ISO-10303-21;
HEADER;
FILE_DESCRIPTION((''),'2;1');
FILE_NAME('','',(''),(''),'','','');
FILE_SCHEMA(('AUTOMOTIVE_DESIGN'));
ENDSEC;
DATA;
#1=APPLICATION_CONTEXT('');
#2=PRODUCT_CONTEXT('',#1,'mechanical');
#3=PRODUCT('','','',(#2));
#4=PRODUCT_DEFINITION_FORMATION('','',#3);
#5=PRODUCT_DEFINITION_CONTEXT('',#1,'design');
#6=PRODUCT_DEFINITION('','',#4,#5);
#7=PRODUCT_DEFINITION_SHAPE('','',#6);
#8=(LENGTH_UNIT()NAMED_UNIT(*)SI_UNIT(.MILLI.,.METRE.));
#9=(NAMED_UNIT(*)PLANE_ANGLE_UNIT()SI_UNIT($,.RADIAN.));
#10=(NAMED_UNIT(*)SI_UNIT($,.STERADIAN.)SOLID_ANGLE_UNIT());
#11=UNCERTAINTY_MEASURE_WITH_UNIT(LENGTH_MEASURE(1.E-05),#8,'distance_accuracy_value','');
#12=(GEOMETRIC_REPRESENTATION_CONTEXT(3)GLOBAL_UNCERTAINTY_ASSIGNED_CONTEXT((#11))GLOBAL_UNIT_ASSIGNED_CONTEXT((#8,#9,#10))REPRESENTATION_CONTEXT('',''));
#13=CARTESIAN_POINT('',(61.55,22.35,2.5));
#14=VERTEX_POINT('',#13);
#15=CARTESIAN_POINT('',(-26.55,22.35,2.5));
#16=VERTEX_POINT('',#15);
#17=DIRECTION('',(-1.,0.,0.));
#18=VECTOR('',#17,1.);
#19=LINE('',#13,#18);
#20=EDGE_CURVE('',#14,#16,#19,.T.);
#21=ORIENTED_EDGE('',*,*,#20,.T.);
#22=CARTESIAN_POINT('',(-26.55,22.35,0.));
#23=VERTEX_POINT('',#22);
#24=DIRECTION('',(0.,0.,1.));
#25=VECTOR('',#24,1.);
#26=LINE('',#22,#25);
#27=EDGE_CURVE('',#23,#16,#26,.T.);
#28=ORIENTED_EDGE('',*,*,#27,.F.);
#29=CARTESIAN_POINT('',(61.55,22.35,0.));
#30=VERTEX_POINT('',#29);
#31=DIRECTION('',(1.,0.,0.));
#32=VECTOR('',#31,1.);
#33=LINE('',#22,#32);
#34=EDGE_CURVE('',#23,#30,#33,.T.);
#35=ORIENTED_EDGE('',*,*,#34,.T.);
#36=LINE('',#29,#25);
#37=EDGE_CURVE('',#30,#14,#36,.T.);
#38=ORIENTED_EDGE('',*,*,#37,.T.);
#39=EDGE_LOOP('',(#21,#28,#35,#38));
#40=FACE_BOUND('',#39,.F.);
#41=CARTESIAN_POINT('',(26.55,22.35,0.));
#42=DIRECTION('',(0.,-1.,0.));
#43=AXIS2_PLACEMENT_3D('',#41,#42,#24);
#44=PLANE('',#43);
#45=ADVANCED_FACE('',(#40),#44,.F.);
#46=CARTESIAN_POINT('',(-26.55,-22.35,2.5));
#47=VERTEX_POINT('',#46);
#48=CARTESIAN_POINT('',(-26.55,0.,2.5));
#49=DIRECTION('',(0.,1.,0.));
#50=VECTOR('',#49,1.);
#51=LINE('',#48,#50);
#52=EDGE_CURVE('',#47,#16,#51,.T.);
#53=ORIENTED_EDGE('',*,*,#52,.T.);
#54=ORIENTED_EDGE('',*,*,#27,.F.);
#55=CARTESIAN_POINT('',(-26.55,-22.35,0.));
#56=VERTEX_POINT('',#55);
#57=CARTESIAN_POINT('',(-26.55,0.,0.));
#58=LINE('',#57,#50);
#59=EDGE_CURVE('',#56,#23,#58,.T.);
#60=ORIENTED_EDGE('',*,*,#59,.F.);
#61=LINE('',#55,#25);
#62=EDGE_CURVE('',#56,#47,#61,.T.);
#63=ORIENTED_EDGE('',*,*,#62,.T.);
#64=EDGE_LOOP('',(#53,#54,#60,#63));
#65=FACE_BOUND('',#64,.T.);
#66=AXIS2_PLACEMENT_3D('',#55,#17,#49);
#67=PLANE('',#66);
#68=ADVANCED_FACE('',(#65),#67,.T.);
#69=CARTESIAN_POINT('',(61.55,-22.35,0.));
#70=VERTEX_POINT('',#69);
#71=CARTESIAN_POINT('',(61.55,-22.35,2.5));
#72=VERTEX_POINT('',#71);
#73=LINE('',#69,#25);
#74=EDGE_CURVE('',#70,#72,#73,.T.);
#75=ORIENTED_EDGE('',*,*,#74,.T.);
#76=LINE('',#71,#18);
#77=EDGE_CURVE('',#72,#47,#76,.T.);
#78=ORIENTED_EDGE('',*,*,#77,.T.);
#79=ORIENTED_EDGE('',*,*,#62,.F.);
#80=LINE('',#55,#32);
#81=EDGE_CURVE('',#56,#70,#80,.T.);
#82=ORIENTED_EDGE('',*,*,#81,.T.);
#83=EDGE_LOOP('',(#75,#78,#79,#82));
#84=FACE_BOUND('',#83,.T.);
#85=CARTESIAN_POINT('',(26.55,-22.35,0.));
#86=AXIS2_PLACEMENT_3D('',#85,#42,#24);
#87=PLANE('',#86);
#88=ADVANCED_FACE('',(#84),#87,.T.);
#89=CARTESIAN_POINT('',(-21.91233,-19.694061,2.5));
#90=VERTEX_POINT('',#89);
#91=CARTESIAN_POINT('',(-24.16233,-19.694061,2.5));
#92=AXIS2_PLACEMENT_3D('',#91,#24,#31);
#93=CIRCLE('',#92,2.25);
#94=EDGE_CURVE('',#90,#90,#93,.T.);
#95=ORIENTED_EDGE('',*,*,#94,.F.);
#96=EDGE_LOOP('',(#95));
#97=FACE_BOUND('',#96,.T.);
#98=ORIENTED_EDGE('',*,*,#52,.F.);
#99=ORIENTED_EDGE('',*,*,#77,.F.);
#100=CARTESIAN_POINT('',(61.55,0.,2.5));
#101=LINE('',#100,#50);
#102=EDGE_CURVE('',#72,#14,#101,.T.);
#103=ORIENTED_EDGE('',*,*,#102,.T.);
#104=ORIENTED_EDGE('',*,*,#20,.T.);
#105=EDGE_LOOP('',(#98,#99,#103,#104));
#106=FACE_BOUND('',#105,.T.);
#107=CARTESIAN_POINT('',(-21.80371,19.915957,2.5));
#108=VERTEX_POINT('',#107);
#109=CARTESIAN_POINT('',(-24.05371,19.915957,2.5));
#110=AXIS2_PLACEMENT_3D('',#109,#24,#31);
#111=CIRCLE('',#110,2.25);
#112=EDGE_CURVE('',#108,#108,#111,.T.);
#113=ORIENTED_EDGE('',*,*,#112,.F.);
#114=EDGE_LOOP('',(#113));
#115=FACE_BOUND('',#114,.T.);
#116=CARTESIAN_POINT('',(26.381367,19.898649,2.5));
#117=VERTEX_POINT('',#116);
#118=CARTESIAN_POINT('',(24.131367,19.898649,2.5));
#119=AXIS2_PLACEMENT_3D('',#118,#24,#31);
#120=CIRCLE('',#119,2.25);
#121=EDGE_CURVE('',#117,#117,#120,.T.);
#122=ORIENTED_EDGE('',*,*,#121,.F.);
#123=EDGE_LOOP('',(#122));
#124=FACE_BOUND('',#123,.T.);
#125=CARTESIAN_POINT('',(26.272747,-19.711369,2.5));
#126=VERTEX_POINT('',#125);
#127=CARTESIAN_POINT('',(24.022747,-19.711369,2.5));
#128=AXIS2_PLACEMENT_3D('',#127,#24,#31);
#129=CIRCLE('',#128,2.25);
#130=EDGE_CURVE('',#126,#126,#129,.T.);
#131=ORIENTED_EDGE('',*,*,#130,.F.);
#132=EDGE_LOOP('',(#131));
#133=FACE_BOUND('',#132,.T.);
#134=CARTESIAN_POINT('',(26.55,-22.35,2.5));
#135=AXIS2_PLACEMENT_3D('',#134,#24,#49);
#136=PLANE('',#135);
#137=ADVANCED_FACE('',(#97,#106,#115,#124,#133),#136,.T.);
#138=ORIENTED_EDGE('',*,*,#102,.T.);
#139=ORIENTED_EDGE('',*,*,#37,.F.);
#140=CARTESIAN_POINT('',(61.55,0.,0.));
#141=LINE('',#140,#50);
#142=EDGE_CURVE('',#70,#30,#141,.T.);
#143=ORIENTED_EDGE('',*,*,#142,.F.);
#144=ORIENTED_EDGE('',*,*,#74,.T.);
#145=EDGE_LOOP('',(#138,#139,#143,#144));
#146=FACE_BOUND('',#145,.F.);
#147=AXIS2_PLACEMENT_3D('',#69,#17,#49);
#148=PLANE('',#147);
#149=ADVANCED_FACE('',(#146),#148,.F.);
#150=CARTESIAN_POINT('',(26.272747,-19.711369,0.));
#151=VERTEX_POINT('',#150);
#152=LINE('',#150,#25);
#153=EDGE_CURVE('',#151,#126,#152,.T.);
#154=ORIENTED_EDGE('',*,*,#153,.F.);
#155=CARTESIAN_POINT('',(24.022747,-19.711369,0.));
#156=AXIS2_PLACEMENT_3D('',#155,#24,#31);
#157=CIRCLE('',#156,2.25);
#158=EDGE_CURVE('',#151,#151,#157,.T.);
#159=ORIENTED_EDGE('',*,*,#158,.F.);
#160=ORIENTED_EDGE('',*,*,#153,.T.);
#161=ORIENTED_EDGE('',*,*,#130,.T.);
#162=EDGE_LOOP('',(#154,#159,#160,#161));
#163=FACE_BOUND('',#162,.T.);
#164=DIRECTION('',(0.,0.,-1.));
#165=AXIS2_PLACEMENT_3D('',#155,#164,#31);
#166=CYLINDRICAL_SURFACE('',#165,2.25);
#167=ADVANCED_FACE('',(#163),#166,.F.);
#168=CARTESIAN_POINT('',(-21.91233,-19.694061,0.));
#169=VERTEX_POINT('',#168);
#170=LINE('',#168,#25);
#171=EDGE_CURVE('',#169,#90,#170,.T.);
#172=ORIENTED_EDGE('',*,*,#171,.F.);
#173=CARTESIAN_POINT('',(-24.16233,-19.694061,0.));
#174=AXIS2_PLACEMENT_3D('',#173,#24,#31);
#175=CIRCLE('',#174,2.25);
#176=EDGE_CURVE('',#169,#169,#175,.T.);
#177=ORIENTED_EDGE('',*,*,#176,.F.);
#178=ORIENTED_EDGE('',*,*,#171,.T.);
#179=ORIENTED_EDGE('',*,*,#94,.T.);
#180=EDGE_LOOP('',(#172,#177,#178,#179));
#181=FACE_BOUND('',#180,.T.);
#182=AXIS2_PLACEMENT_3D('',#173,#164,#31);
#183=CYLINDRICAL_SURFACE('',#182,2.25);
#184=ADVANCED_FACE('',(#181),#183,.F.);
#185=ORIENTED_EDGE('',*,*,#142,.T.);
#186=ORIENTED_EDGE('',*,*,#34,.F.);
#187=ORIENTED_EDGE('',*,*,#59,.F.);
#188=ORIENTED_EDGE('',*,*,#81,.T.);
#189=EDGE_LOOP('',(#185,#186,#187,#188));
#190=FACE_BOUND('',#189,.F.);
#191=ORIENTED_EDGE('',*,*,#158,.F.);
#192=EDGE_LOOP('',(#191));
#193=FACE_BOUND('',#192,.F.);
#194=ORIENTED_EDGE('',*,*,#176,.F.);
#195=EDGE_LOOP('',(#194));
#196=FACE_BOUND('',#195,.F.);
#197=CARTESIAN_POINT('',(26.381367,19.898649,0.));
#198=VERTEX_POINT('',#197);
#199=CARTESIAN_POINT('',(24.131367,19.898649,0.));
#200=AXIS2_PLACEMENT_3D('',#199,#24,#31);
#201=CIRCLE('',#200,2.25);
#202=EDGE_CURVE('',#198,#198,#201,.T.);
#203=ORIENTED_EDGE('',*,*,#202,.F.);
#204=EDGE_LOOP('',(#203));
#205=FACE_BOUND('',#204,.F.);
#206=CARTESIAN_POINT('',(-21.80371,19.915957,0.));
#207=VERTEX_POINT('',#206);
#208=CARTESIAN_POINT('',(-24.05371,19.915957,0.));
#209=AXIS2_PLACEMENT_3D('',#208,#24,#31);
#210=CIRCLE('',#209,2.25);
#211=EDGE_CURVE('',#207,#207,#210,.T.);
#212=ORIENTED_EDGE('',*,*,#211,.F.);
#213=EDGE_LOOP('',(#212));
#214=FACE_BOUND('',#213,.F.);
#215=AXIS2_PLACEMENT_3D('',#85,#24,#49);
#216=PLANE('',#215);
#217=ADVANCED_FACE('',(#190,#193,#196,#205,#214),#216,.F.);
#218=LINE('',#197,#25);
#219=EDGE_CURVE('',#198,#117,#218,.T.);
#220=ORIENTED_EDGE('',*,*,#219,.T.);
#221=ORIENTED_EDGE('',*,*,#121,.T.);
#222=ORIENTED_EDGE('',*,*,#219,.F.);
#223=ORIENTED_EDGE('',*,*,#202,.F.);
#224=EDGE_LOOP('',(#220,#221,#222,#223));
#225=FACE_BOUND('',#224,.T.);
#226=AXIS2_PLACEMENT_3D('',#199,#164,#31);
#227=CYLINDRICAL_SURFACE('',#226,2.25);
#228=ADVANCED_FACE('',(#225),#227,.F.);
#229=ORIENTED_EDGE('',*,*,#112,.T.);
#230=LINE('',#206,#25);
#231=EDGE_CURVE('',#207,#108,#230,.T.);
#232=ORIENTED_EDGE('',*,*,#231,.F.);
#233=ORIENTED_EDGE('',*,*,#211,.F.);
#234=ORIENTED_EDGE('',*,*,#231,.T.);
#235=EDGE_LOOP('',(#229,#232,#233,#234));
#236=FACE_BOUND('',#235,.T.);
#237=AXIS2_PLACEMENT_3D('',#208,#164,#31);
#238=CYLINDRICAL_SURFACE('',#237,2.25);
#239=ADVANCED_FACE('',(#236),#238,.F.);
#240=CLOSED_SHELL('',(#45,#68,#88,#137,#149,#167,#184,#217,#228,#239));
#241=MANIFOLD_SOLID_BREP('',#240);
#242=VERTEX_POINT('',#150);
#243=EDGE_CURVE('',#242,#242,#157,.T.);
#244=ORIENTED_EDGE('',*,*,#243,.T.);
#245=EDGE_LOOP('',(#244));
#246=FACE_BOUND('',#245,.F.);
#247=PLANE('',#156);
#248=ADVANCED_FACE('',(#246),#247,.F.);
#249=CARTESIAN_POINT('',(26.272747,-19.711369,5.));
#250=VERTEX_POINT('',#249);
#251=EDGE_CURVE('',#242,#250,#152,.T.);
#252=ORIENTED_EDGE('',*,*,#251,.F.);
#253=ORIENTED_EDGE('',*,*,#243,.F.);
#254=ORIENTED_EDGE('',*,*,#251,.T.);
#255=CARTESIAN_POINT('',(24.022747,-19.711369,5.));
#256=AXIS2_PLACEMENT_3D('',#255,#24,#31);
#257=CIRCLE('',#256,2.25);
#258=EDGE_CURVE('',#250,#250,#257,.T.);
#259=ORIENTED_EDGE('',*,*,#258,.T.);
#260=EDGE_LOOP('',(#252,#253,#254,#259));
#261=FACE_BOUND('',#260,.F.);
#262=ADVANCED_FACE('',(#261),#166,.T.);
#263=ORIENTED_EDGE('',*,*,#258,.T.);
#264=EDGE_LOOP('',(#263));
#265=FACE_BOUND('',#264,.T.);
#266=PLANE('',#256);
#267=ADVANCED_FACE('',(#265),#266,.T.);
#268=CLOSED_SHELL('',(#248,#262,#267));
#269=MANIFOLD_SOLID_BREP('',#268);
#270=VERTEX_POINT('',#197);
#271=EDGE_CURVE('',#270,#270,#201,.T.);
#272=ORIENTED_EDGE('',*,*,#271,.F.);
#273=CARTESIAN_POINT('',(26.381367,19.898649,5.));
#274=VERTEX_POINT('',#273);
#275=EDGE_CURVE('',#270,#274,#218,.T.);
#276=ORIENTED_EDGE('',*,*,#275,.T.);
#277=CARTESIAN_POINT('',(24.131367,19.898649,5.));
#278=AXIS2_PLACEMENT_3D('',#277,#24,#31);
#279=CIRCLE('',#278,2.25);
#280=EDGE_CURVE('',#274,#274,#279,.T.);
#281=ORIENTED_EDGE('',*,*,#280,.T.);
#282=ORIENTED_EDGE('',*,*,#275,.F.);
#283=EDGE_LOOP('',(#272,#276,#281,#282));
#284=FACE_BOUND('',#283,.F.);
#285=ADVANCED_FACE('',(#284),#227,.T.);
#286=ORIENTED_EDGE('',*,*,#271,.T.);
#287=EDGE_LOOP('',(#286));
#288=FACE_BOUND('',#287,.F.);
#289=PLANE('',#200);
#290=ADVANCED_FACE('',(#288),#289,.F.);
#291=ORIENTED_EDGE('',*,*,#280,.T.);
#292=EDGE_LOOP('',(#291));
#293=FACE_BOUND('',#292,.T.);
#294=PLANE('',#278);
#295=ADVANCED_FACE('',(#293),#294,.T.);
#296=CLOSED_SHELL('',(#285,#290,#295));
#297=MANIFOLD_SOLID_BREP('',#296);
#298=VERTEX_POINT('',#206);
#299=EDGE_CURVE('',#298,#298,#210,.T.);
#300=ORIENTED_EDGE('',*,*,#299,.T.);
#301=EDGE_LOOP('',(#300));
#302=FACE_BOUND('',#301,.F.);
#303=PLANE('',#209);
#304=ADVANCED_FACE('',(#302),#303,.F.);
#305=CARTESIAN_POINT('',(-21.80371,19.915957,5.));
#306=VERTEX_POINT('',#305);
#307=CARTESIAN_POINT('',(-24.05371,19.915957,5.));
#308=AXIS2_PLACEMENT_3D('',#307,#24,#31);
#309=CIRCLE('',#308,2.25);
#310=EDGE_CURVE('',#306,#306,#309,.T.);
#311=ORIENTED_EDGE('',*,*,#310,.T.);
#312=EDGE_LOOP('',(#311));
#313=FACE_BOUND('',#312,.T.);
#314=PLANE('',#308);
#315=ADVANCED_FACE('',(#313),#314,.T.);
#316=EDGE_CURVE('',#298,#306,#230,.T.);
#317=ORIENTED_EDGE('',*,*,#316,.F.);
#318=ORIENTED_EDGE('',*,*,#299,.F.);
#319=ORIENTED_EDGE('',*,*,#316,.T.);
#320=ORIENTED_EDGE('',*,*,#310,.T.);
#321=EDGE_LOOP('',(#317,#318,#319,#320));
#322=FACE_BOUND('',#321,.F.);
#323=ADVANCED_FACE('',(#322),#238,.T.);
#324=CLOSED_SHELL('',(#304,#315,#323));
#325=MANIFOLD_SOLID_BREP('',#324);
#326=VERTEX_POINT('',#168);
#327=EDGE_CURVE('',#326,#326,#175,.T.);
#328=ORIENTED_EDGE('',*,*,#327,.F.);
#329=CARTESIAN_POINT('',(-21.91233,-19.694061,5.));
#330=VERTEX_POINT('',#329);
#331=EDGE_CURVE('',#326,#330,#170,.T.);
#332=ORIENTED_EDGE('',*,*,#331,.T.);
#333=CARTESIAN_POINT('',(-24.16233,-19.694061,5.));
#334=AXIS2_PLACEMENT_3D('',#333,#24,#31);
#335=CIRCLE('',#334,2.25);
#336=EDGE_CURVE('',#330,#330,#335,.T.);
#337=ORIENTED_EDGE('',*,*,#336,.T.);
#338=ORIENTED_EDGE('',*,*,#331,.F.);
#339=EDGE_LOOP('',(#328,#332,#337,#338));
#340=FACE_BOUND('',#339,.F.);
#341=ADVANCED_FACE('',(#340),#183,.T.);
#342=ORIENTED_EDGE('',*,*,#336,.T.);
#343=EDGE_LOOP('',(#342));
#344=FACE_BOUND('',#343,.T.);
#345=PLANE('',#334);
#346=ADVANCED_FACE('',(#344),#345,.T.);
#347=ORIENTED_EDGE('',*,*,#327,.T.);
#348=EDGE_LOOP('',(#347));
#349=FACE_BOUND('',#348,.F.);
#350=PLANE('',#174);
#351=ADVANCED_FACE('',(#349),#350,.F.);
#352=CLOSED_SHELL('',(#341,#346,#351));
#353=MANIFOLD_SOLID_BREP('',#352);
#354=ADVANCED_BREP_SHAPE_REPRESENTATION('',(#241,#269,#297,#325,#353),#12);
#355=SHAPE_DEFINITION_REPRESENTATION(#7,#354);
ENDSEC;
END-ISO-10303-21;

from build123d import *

# Parameters (mm, degrees)
F0_R     = 2.25
F1_DEPTH = 5
F0_W     = 53.1
F0_H     = 44.7
F2_DEPTH = 2.5
F6_DEPTH = 35


# Not quite as in the source:
# - the program builds the solid bodies; features that only make, move or delete a surface that nothing else refers to are left out


with BuildPart() as f1:
    # F0 (on Top) → F1 (new body)
    with BuildSketch(Plane.XY):
        with Locations((24.1313669831, 19.8986493051)):
            Circle(F0_R)
    extrude(amount=F1_DEPTH)


with BuildPart() as f1b:
    # F0 (on Top) → F1, piece 2 (new body)
    with BuildSketch(Plane.XY):
        with Locations((-24.0537095815, 19.9159570038)):
            Circle(F0_R)
    extrude(amount=F1_DEPTH)


with BuildPart() as f1c:
    # F0 (on Top) → F1, piece 3 (new body)
    with BuildSketch(Plane.XY):
        with Locations((-24.1623297334, -19.694061164)):
            Circle(F0_R)
    extrude(amount=F1_DEPTH)


with BuildPart() as f1d:
    # F0 (on Top) → F1, piece 4 (new body)
    with BuildSketch(Plane.XY):
        with Locations((24.0227468312, -19.7113688628)):
            Circle(F0_R)
    extrude(amount=F1_DEPTH)


with BuildPart() as f2:
    # F0 (on Top) → F2 (new body)
    with BuildSketch(Plane.XY):
        Rectangle(F0_W, F0_H)
        with Locations((-24.1623297334, -19.694061164)):
            Circle(F0_R, mode=Mode.SUBTRACT)
        with Locations((24.0227468312, -19.7113688628)):
            Circle(F0_R, mode=Mode.SUBTRACT)
        with Locations((-24.0537095815, 19.9159570038)):
            Circle(F0_R, mode=Mode.SUBTRACT)
        with Locations((24.1313669831, 19.8986493051)):
            Circle(F0_R, mode=Mode.SUBTRACT)
    extrude(amount=F2_DEPTH)

    # F6 (add): a face of the model
    f6_faces = [f2.faces().sort_by_distance(p)[0] for p in [
        (26.55, 0, 1.25),
    ]]
    extrude(f6_faces, amount=F6_DEPTH)


solid = Compound([f1.part, f1b.part, f1c.part, f1d.part, f2.part])
